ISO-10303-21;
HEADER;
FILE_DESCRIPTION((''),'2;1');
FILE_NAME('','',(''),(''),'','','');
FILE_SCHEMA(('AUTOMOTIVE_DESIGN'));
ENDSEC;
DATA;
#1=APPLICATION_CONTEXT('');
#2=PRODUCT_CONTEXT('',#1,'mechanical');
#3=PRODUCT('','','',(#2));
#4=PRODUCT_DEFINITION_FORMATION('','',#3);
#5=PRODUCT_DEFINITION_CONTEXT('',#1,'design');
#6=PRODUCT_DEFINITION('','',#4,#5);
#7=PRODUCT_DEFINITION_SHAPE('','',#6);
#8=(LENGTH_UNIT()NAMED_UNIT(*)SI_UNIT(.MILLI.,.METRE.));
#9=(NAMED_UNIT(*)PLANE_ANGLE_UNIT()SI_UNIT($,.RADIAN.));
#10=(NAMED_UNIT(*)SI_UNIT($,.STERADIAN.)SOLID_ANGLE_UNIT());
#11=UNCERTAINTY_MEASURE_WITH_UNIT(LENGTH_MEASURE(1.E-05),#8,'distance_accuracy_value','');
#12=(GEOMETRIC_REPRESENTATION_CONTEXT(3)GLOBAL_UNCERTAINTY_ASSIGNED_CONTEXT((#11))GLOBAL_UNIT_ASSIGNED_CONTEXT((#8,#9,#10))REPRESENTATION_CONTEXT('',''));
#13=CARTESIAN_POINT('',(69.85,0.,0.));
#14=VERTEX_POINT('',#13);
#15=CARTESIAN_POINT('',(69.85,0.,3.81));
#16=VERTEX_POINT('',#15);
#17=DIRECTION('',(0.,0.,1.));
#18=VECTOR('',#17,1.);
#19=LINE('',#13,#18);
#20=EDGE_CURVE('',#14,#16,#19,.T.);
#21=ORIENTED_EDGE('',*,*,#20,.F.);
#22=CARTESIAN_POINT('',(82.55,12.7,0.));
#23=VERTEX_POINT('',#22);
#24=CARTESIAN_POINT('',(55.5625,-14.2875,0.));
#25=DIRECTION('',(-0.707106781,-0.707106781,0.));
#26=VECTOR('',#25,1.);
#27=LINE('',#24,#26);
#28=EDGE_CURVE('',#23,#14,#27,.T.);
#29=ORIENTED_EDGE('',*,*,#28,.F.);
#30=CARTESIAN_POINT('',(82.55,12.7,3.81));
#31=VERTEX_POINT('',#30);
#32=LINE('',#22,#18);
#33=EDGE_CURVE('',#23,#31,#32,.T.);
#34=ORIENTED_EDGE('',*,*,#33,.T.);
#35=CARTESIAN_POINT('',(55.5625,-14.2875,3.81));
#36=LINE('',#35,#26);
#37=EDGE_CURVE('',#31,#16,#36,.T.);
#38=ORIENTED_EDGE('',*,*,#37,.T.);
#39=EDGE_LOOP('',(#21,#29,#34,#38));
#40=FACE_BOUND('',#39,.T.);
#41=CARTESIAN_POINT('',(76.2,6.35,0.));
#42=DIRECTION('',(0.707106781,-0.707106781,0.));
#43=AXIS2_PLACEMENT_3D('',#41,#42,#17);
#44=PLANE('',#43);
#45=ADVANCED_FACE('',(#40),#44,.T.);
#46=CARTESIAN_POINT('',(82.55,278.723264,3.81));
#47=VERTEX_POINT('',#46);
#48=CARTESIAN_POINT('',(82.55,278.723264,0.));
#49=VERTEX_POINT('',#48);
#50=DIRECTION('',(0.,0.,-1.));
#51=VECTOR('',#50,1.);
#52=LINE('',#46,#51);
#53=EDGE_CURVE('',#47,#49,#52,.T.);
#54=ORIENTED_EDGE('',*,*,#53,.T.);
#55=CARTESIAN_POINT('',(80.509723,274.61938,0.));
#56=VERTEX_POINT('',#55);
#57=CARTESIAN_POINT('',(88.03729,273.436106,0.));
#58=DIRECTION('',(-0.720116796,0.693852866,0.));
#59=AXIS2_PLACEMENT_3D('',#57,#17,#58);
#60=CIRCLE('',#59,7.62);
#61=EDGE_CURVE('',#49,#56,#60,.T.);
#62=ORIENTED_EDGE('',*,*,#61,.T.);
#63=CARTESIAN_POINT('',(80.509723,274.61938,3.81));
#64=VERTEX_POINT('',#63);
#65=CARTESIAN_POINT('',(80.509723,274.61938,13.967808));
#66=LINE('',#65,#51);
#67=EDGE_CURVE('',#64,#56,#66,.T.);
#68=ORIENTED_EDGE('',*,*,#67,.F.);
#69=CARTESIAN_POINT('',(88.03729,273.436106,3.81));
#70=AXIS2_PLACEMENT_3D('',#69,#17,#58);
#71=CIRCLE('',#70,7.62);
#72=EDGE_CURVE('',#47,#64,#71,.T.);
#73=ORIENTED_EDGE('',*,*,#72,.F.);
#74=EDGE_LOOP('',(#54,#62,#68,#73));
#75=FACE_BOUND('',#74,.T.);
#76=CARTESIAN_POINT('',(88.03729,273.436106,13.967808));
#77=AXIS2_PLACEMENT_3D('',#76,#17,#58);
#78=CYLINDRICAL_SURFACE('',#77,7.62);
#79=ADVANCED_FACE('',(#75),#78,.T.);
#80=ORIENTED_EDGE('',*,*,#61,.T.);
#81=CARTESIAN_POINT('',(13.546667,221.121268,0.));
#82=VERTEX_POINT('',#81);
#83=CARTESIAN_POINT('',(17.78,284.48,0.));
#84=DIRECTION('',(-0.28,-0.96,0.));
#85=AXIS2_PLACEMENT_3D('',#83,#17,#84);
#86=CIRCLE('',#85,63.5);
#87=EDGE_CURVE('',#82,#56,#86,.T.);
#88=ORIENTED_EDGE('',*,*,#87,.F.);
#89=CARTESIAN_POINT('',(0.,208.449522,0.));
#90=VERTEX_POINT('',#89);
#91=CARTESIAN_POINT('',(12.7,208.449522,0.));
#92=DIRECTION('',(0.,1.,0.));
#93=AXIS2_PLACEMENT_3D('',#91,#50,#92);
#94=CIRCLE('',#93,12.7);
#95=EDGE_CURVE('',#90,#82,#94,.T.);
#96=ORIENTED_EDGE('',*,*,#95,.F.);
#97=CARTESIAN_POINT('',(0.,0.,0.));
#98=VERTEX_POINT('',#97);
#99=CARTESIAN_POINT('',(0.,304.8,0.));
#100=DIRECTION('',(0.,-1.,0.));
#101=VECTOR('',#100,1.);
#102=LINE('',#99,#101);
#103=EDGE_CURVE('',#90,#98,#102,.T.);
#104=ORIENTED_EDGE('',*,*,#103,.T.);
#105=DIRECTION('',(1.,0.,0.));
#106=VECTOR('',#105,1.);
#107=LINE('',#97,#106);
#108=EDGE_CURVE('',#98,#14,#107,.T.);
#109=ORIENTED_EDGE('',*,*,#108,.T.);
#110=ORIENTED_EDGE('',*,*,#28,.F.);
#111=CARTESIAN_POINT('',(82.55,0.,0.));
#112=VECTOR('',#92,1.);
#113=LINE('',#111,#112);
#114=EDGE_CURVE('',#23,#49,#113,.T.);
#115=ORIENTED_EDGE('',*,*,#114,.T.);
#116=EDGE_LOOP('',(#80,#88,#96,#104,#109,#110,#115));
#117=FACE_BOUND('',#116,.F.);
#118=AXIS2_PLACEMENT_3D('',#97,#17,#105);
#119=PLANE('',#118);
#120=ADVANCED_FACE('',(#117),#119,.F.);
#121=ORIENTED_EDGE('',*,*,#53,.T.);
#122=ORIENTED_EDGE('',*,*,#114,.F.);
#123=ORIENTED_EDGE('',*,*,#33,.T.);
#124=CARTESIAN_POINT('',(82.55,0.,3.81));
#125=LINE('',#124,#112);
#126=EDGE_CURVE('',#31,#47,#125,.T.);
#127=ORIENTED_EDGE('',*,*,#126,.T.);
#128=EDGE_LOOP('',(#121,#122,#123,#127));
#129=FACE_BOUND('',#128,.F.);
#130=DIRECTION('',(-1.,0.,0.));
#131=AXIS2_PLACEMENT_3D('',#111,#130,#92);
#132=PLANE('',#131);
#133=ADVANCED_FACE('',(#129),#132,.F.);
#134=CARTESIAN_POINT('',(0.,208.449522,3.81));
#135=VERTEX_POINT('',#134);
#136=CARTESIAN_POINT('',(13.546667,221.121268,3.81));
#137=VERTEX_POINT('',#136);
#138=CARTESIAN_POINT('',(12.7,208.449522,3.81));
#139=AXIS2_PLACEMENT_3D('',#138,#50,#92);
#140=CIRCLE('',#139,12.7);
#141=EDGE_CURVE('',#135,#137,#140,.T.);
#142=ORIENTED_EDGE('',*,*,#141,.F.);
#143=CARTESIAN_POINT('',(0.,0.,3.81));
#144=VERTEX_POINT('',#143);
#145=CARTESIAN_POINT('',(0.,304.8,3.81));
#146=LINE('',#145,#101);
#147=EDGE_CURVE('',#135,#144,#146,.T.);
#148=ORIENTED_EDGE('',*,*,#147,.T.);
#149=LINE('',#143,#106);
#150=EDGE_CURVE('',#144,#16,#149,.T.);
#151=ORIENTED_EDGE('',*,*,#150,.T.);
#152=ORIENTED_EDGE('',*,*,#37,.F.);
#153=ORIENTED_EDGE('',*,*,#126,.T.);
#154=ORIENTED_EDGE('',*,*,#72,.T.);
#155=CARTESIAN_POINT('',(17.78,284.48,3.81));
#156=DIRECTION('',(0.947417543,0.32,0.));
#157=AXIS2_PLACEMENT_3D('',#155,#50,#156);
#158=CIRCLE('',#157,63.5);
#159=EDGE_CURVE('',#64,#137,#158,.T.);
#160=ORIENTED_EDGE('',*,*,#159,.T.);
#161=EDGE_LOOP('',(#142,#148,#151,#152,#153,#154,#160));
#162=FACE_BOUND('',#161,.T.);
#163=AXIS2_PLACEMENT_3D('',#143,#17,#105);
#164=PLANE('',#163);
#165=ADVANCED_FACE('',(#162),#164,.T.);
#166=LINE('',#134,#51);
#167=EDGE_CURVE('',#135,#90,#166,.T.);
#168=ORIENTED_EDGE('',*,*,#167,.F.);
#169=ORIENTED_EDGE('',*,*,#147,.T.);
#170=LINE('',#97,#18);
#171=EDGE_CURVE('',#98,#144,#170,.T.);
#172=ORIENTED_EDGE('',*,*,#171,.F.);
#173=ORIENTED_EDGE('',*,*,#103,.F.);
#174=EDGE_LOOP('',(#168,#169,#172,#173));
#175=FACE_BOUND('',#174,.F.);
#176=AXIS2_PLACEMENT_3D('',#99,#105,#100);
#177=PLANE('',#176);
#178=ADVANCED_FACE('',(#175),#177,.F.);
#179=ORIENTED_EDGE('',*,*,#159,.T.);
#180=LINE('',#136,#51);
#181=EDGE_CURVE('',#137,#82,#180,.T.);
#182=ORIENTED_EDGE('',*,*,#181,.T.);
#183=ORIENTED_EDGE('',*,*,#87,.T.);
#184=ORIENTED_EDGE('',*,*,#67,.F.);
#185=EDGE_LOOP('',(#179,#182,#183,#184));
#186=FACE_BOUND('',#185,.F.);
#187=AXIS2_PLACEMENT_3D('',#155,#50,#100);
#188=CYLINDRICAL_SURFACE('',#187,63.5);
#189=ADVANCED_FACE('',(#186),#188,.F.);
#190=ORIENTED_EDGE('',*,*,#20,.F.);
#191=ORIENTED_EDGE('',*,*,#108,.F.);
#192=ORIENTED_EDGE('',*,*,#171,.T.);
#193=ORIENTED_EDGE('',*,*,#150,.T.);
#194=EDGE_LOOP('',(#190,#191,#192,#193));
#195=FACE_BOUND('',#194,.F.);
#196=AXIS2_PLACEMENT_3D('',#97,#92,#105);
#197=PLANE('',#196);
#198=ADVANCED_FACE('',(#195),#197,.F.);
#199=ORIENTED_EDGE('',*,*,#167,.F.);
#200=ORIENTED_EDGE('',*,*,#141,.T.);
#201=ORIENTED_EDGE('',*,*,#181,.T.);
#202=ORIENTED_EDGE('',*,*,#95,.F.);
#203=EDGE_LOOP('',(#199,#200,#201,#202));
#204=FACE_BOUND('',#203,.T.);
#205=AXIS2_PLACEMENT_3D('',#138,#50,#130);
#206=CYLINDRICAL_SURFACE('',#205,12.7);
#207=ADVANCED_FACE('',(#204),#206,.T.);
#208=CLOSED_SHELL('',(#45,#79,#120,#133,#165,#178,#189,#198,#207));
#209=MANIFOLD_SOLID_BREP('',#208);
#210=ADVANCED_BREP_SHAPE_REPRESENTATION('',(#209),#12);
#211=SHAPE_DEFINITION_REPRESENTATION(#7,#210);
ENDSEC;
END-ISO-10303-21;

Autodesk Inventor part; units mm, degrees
ref_plane "YZ Plane" through (0, 0, 0) normal (1, 0, 0) x (0, 1, 0)
ref_plane "XZ Plane" through (0, 0, 0) normal (0, 1, 0) x (-1, 0, 0)
ref_plane "XY Plane" through (0, 0, 0) normal (0, 0, 1) x (1, 0, 0)
sketch "Sketch1" plane through (0, 0, 0) normal (0, 0, 1) x (1, 0, 0)
  line L0 (0, 0) -> (82.55, 0)
  line L1 (82.55, 0) -> (82.55, 304.8)
  line L2 (82.55, 304.8) -> (0, 304.8)
  line L3 (0, 304.8) -> (0, 0)
  dimension "d0" = 82.55
  dimension "d1" = 304.8
extrude "Extrusion1" add sketch "Sketch1" along normal blind 3.81
chamfer "Chamfer1" distance 12.7 angle 45 1 edges at (82.55, 0, 1.905)
hole "Hole1" at (17.78, 284.48, 3.81) direction (0, 0, -1) diameter 127 end through all
hole "Hole2" at (80.6545, 302.7787, 3.81) direction (0, 0, -1) diameter 48.26 end through all
fillet "Fillet1" radius 7.62 1 edges at (81.0119, 278.6513, 1.905)
fillet "Fillet2" radius 12.7 1 edges at (0, 223.52, 1.905)
properties part number "Backstopleft"
